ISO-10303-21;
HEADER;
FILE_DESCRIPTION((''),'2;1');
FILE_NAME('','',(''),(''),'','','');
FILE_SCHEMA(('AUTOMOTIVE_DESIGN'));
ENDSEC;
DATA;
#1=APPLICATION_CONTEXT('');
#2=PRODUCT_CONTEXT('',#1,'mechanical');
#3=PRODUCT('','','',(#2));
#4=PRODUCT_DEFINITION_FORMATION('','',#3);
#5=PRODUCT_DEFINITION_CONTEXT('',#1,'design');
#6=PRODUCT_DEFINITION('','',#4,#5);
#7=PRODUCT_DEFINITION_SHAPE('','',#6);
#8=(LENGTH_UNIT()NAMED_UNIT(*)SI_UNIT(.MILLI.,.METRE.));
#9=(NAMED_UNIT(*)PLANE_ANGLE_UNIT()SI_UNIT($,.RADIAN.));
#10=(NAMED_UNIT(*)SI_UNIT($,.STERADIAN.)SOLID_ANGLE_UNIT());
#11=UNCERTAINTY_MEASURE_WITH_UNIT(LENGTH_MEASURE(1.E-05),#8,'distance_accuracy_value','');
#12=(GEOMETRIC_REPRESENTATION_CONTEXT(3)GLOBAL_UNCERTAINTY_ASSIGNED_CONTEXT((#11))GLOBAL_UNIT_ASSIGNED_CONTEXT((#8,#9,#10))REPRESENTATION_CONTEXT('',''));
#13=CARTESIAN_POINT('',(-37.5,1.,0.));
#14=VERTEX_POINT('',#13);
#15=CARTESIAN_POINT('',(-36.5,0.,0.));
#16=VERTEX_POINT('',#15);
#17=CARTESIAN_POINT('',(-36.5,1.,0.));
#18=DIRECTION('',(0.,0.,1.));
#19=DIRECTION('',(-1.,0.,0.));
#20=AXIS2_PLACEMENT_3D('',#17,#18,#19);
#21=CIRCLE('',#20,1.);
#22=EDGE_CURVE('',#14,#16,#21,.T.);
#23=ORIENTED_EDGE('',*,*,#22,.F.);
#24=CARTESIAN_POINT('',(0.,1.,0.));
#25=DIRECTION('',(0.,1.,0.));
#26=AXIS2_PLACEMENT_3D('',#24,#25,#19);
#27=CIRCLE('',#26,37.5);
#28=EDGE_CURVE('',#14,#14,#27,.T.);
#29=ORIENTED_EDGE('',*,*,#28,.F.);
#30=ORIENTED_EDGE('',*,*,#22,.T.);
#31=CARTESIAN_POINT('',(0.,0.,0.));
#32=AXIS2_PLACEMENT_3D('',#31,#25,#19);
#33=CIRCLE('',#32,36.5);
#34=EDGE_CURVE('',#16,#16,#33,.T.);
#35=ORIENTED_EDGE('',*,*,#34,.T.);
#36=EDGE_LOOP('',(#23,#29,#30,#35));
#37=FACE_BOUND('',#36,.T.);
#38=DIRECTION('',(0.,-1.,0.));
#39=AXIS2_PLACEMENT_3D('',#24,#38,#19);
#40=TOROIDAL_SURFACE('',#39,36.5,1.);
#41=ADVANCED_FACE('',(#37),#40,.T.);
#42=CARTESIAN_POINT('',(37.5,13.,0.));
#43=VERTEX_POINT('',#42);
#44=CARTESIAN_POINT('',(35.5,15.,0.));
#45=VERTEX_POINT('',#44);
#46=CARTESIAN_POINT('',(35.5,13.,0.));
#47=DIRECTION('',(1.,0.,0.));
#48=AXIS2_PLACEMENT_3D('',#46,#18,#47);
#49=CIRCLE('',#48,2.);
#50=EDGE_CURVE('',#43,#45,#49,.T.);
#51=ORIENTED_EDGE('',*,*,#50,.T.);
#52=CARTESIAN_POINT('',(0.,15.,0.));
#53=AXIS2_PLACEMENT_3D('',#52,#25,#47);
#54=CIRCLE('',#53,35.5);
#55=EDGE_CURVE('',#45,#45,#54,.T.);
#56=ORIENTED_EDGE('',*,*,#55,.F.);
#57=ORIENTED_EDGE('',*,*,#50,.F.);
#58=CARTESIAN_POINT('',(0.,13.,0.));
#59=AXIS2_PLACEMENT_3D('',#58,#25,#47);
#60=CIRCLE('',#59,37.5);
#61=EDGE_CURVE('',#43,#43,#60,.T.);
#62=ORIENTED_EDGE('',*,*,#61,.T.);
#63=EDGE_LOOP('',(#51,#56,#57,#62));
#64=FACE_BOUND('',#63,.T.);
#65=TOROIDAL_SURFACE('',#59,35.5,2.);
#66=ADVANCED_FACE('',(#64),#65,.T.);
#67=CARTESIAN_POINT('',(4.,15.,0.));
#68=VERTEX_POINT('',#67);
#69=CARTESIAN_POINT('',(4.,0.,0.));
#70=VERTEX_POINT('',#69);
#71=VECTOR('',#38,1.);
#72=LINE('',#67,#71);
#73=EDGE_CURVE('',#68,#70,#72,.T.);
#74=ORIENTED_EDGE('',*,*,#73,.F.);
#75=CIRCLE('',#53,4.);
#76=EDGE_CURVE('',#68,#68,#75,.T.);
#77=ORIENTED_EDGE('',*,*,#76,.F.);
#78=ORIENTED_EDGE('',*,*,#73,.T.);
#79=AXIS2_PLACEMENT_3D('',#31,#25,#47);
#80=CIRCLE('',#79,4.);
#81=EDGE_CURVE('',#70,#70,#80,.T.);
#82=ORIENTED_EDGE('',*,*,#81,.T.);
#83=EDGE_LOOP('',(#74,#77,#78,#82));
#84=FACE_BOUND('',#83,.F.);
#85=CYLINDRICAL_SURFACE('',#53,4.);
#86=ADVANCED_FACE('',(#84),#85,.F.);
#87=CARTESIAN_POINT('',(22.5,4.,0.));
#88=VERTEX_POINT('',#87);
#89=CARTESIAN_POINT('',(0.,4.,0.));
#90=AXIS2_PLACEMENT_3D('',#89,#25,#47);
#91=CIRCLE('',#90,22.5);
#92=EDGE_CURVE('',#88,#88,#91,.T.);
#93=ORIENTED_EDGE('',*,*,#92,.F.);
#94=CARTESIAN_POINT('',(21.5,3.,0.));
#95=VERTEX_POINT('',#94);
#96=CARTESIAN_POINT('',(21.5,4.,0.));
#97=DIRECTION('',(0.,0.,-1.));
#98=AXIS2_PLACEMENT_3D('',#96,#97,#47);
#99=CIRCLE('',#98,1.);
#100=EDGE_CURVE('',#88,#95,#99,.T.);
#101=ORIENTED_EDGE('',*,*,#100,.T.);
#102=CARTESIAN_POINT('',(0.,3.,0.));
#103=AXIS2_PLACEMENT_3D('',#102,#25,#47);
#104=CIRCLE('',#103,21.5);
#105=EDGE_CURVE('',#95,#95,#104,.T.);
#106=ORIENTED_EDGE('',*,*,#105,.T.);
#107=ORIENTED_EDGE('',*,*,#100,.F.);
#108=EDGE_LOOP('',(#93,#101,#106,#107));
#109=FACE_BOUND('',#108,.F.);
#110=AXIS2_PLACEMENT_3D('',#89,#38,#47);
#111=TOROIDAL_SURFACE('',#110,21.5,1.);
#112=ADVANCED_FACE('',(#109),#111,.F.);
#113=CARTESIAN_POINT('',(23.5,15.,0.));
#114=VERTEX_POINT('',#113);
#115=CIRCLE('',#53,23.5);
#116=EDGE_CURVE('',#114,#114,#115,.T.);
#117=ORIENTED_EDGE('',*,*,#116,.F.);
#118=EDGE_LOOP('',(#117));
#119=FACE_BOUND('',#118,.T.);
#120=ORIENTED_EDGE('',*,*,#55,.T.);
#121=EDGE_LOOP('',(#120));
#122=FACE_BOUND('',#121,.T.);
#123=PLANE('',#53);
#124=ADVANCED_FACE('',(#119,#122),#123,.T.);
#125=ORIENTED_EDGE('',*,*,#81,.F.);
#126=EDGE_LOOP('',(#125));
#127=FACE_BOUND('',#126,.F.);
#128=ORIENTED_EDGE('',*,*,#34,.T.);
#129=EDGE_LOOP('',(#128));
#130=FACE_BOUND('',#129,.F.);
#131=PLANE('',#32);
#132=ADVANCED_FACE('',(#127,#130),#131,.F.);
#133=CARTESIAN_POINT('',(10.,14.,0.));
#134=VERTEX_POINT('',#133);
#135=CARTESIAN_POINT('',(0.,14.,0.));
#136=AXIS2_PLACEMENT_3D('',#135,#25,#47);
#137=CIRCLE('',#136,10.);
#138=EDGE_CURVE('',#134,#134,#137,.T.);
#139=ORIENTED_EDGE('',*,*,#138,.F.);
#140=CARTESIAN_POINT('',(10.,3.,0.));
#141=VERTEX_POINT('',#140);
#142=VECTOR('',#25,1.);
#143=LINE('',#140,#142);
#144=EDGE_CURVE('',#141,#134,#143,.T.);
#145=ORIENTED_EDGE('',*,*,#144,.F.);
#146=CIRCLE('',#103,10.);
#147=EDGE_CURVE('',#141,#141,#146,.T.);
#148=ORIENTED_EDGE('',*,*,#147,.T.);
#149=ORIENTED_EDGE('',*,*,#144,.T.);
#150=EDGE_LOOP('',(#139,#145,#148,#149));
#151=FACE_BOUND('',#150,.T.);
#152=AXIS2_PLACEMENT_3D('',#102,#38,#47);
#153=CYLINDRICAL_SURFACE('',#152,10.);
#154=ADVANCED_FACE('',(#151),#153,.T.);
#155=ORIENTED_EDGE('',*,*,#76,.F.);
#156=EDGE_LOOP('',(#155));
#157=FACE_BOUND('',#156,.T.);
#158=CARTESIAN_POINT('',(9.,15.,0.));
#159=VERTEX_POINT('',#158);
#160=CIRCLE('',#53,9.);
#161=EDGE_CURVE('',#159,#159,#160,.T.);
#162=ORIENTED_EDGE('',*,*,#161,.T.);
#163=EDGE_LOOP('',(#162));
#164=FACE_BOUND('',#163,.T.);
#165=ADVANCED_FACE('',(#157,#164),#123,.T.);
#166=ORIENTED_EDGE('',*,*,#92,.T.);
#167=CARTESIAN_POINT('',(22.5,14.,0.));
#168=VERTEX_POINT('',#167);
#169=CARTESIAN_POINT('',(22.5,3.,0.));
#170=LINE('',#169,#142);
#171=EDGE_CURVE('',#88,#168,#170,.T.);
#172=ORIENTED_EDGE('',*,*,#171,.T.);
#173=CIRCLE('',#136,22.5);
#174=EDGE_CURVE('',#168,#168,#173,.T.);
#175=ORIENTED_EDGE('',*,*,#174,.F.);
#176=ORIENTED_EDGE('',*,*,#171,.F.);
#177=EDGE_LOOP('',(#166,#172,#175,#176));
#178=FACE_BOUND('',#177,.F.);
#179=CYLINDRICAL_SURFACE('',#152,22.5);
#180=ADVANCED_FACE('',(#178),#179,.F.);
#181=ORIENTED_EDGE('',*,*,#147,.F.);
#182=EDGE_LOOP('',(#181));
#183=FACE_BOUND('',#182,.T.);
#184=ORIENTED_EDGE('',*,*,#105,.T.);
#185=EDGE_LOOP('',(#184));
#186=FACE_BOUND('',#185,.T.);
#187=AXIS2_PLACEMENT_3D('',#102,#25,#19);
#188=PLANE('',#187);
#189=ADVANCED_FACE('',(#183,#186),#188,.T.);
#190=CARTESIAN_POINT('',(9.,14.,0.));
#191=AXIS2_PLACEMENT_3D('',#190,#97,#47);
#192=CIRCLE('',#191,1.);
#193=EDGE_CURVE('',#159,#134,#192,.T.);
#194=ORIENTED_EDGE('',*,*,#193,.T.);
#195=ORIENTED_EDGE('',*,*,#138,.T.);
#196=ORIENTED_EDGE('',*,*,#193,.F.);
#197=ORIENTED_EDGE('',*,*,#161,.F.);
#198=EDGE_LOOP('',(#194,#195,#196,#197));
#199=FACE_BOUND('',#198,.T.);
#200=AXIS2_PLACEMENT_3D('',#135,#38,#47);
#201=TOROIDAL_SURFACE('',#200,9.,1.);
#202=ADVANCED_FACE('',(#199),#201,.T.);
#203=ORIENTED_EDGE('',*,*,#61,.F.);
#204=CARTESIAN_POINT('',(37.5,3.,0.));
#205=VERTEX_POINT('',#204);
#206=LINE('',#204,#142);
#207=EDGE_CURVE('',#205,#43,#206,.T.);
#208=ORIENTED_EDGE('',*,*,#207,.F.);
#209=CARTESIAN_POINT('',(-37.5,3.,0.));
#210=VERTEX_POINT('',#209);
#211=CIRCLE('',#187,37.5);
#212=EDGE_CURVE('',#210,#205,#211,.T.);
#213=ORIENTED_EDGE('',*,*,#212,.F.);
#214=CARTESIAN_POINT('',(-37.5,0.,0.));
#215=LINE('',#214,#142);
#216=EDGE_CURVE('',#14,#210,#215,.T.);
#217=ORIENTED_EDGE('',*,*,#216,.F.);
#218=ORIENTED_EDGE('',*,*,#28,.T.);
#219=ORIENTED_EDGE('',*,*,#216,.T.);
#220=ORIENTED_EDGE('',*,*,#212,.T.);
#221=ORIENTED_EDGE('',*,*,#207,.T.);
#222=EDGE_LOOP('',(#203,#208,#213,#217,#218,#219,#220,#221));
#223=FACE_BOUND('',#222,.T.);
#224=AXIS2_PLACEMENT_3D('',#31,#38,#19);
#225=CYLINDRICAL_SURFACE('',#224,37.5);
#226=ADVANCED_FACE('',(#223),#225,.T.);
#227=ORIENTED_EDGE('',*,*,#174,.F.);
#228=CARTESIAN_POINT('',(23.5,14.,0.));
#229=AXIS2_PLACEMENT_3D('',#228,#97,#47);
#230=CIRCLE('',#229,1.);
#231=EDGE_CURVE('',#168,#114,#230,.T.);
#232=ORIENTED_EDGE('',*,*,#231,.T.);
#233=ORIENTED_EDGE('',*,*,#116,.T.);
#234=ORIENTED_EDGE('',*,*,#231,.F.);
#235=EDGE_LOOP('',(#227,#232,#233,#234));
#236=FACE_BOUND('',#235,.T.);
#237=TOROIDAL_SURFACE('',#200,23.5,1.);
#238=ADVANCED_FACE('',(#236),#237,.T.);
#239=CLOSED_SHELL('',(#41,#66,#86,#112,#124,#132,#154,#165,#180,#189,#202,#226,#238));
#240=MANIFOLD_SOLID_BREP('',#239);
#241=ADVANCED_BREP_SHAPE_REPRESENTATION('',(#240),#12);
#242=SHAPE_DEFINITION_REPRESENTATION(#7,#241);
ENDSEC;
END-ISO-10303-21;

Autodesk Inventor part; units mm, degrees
ref_plane "YZ Plane" through (0, 0, 0) normal (1, 0, 0) x (0, 1, 0)
ref_plane "XZ Plane" through (0, 0, 0) normal (0, 1, 0) x (-1, 0, 0)
ref_plane "XY Plane" through (0, 0, 0) normal (0, 0, 1) x (1, 0, 0)
sketch "Esquisse1" plane through (0, 0, 0) normal (0, 1, 0) x (-1, 0, 0)
  circle A0 centre (0, 0) radius 37.5
  dimension "d0" = 75
extrude "Extrusion1" add sketch "Esquisse1" along normal blind 3
sketch "Esquisse2" plane through (0, 3, 0) normal (0, 1, 0) x (1, 0, 0)
  circle A0 centre (0, 0) radius 37.5 projected
  circle A1 centre (0, 0) radius 10
  circle A2 centre (0, 0) radius 22.5
  dimension "d3" = 15
  dimension "d4" = 20
extrude "Extrusion2" add sketch "Esquisse2" along normal blind 12
sketch "Esquisse3" plane through (0, 15, 0) normal (0, 1, 0) x (1, 0, 0)
  circle A0 centre (0, 0) radius 10 projected
  circle A1 centre (0, 0) radius 4
  dimension "d7" = 8
extrude "Extrusion3" cut sketch "Esquisse3" against normal through all contours A1
fillet "Congé1" radius 2 1 edges at (-37.5, 15, 0)
fillet "Congé2" radius 1 1 edges at (-10, 15, 0)
fillet "Congé3" radius 1 1 edges at (-22.5, 15, 0)
fillet "Congé4" radius 1 1 edges at (-22.5, 3, 0)
fillet "Congé5" radius 1 1 edges at (37.5, 0, 0)
properties part number "wheel"
